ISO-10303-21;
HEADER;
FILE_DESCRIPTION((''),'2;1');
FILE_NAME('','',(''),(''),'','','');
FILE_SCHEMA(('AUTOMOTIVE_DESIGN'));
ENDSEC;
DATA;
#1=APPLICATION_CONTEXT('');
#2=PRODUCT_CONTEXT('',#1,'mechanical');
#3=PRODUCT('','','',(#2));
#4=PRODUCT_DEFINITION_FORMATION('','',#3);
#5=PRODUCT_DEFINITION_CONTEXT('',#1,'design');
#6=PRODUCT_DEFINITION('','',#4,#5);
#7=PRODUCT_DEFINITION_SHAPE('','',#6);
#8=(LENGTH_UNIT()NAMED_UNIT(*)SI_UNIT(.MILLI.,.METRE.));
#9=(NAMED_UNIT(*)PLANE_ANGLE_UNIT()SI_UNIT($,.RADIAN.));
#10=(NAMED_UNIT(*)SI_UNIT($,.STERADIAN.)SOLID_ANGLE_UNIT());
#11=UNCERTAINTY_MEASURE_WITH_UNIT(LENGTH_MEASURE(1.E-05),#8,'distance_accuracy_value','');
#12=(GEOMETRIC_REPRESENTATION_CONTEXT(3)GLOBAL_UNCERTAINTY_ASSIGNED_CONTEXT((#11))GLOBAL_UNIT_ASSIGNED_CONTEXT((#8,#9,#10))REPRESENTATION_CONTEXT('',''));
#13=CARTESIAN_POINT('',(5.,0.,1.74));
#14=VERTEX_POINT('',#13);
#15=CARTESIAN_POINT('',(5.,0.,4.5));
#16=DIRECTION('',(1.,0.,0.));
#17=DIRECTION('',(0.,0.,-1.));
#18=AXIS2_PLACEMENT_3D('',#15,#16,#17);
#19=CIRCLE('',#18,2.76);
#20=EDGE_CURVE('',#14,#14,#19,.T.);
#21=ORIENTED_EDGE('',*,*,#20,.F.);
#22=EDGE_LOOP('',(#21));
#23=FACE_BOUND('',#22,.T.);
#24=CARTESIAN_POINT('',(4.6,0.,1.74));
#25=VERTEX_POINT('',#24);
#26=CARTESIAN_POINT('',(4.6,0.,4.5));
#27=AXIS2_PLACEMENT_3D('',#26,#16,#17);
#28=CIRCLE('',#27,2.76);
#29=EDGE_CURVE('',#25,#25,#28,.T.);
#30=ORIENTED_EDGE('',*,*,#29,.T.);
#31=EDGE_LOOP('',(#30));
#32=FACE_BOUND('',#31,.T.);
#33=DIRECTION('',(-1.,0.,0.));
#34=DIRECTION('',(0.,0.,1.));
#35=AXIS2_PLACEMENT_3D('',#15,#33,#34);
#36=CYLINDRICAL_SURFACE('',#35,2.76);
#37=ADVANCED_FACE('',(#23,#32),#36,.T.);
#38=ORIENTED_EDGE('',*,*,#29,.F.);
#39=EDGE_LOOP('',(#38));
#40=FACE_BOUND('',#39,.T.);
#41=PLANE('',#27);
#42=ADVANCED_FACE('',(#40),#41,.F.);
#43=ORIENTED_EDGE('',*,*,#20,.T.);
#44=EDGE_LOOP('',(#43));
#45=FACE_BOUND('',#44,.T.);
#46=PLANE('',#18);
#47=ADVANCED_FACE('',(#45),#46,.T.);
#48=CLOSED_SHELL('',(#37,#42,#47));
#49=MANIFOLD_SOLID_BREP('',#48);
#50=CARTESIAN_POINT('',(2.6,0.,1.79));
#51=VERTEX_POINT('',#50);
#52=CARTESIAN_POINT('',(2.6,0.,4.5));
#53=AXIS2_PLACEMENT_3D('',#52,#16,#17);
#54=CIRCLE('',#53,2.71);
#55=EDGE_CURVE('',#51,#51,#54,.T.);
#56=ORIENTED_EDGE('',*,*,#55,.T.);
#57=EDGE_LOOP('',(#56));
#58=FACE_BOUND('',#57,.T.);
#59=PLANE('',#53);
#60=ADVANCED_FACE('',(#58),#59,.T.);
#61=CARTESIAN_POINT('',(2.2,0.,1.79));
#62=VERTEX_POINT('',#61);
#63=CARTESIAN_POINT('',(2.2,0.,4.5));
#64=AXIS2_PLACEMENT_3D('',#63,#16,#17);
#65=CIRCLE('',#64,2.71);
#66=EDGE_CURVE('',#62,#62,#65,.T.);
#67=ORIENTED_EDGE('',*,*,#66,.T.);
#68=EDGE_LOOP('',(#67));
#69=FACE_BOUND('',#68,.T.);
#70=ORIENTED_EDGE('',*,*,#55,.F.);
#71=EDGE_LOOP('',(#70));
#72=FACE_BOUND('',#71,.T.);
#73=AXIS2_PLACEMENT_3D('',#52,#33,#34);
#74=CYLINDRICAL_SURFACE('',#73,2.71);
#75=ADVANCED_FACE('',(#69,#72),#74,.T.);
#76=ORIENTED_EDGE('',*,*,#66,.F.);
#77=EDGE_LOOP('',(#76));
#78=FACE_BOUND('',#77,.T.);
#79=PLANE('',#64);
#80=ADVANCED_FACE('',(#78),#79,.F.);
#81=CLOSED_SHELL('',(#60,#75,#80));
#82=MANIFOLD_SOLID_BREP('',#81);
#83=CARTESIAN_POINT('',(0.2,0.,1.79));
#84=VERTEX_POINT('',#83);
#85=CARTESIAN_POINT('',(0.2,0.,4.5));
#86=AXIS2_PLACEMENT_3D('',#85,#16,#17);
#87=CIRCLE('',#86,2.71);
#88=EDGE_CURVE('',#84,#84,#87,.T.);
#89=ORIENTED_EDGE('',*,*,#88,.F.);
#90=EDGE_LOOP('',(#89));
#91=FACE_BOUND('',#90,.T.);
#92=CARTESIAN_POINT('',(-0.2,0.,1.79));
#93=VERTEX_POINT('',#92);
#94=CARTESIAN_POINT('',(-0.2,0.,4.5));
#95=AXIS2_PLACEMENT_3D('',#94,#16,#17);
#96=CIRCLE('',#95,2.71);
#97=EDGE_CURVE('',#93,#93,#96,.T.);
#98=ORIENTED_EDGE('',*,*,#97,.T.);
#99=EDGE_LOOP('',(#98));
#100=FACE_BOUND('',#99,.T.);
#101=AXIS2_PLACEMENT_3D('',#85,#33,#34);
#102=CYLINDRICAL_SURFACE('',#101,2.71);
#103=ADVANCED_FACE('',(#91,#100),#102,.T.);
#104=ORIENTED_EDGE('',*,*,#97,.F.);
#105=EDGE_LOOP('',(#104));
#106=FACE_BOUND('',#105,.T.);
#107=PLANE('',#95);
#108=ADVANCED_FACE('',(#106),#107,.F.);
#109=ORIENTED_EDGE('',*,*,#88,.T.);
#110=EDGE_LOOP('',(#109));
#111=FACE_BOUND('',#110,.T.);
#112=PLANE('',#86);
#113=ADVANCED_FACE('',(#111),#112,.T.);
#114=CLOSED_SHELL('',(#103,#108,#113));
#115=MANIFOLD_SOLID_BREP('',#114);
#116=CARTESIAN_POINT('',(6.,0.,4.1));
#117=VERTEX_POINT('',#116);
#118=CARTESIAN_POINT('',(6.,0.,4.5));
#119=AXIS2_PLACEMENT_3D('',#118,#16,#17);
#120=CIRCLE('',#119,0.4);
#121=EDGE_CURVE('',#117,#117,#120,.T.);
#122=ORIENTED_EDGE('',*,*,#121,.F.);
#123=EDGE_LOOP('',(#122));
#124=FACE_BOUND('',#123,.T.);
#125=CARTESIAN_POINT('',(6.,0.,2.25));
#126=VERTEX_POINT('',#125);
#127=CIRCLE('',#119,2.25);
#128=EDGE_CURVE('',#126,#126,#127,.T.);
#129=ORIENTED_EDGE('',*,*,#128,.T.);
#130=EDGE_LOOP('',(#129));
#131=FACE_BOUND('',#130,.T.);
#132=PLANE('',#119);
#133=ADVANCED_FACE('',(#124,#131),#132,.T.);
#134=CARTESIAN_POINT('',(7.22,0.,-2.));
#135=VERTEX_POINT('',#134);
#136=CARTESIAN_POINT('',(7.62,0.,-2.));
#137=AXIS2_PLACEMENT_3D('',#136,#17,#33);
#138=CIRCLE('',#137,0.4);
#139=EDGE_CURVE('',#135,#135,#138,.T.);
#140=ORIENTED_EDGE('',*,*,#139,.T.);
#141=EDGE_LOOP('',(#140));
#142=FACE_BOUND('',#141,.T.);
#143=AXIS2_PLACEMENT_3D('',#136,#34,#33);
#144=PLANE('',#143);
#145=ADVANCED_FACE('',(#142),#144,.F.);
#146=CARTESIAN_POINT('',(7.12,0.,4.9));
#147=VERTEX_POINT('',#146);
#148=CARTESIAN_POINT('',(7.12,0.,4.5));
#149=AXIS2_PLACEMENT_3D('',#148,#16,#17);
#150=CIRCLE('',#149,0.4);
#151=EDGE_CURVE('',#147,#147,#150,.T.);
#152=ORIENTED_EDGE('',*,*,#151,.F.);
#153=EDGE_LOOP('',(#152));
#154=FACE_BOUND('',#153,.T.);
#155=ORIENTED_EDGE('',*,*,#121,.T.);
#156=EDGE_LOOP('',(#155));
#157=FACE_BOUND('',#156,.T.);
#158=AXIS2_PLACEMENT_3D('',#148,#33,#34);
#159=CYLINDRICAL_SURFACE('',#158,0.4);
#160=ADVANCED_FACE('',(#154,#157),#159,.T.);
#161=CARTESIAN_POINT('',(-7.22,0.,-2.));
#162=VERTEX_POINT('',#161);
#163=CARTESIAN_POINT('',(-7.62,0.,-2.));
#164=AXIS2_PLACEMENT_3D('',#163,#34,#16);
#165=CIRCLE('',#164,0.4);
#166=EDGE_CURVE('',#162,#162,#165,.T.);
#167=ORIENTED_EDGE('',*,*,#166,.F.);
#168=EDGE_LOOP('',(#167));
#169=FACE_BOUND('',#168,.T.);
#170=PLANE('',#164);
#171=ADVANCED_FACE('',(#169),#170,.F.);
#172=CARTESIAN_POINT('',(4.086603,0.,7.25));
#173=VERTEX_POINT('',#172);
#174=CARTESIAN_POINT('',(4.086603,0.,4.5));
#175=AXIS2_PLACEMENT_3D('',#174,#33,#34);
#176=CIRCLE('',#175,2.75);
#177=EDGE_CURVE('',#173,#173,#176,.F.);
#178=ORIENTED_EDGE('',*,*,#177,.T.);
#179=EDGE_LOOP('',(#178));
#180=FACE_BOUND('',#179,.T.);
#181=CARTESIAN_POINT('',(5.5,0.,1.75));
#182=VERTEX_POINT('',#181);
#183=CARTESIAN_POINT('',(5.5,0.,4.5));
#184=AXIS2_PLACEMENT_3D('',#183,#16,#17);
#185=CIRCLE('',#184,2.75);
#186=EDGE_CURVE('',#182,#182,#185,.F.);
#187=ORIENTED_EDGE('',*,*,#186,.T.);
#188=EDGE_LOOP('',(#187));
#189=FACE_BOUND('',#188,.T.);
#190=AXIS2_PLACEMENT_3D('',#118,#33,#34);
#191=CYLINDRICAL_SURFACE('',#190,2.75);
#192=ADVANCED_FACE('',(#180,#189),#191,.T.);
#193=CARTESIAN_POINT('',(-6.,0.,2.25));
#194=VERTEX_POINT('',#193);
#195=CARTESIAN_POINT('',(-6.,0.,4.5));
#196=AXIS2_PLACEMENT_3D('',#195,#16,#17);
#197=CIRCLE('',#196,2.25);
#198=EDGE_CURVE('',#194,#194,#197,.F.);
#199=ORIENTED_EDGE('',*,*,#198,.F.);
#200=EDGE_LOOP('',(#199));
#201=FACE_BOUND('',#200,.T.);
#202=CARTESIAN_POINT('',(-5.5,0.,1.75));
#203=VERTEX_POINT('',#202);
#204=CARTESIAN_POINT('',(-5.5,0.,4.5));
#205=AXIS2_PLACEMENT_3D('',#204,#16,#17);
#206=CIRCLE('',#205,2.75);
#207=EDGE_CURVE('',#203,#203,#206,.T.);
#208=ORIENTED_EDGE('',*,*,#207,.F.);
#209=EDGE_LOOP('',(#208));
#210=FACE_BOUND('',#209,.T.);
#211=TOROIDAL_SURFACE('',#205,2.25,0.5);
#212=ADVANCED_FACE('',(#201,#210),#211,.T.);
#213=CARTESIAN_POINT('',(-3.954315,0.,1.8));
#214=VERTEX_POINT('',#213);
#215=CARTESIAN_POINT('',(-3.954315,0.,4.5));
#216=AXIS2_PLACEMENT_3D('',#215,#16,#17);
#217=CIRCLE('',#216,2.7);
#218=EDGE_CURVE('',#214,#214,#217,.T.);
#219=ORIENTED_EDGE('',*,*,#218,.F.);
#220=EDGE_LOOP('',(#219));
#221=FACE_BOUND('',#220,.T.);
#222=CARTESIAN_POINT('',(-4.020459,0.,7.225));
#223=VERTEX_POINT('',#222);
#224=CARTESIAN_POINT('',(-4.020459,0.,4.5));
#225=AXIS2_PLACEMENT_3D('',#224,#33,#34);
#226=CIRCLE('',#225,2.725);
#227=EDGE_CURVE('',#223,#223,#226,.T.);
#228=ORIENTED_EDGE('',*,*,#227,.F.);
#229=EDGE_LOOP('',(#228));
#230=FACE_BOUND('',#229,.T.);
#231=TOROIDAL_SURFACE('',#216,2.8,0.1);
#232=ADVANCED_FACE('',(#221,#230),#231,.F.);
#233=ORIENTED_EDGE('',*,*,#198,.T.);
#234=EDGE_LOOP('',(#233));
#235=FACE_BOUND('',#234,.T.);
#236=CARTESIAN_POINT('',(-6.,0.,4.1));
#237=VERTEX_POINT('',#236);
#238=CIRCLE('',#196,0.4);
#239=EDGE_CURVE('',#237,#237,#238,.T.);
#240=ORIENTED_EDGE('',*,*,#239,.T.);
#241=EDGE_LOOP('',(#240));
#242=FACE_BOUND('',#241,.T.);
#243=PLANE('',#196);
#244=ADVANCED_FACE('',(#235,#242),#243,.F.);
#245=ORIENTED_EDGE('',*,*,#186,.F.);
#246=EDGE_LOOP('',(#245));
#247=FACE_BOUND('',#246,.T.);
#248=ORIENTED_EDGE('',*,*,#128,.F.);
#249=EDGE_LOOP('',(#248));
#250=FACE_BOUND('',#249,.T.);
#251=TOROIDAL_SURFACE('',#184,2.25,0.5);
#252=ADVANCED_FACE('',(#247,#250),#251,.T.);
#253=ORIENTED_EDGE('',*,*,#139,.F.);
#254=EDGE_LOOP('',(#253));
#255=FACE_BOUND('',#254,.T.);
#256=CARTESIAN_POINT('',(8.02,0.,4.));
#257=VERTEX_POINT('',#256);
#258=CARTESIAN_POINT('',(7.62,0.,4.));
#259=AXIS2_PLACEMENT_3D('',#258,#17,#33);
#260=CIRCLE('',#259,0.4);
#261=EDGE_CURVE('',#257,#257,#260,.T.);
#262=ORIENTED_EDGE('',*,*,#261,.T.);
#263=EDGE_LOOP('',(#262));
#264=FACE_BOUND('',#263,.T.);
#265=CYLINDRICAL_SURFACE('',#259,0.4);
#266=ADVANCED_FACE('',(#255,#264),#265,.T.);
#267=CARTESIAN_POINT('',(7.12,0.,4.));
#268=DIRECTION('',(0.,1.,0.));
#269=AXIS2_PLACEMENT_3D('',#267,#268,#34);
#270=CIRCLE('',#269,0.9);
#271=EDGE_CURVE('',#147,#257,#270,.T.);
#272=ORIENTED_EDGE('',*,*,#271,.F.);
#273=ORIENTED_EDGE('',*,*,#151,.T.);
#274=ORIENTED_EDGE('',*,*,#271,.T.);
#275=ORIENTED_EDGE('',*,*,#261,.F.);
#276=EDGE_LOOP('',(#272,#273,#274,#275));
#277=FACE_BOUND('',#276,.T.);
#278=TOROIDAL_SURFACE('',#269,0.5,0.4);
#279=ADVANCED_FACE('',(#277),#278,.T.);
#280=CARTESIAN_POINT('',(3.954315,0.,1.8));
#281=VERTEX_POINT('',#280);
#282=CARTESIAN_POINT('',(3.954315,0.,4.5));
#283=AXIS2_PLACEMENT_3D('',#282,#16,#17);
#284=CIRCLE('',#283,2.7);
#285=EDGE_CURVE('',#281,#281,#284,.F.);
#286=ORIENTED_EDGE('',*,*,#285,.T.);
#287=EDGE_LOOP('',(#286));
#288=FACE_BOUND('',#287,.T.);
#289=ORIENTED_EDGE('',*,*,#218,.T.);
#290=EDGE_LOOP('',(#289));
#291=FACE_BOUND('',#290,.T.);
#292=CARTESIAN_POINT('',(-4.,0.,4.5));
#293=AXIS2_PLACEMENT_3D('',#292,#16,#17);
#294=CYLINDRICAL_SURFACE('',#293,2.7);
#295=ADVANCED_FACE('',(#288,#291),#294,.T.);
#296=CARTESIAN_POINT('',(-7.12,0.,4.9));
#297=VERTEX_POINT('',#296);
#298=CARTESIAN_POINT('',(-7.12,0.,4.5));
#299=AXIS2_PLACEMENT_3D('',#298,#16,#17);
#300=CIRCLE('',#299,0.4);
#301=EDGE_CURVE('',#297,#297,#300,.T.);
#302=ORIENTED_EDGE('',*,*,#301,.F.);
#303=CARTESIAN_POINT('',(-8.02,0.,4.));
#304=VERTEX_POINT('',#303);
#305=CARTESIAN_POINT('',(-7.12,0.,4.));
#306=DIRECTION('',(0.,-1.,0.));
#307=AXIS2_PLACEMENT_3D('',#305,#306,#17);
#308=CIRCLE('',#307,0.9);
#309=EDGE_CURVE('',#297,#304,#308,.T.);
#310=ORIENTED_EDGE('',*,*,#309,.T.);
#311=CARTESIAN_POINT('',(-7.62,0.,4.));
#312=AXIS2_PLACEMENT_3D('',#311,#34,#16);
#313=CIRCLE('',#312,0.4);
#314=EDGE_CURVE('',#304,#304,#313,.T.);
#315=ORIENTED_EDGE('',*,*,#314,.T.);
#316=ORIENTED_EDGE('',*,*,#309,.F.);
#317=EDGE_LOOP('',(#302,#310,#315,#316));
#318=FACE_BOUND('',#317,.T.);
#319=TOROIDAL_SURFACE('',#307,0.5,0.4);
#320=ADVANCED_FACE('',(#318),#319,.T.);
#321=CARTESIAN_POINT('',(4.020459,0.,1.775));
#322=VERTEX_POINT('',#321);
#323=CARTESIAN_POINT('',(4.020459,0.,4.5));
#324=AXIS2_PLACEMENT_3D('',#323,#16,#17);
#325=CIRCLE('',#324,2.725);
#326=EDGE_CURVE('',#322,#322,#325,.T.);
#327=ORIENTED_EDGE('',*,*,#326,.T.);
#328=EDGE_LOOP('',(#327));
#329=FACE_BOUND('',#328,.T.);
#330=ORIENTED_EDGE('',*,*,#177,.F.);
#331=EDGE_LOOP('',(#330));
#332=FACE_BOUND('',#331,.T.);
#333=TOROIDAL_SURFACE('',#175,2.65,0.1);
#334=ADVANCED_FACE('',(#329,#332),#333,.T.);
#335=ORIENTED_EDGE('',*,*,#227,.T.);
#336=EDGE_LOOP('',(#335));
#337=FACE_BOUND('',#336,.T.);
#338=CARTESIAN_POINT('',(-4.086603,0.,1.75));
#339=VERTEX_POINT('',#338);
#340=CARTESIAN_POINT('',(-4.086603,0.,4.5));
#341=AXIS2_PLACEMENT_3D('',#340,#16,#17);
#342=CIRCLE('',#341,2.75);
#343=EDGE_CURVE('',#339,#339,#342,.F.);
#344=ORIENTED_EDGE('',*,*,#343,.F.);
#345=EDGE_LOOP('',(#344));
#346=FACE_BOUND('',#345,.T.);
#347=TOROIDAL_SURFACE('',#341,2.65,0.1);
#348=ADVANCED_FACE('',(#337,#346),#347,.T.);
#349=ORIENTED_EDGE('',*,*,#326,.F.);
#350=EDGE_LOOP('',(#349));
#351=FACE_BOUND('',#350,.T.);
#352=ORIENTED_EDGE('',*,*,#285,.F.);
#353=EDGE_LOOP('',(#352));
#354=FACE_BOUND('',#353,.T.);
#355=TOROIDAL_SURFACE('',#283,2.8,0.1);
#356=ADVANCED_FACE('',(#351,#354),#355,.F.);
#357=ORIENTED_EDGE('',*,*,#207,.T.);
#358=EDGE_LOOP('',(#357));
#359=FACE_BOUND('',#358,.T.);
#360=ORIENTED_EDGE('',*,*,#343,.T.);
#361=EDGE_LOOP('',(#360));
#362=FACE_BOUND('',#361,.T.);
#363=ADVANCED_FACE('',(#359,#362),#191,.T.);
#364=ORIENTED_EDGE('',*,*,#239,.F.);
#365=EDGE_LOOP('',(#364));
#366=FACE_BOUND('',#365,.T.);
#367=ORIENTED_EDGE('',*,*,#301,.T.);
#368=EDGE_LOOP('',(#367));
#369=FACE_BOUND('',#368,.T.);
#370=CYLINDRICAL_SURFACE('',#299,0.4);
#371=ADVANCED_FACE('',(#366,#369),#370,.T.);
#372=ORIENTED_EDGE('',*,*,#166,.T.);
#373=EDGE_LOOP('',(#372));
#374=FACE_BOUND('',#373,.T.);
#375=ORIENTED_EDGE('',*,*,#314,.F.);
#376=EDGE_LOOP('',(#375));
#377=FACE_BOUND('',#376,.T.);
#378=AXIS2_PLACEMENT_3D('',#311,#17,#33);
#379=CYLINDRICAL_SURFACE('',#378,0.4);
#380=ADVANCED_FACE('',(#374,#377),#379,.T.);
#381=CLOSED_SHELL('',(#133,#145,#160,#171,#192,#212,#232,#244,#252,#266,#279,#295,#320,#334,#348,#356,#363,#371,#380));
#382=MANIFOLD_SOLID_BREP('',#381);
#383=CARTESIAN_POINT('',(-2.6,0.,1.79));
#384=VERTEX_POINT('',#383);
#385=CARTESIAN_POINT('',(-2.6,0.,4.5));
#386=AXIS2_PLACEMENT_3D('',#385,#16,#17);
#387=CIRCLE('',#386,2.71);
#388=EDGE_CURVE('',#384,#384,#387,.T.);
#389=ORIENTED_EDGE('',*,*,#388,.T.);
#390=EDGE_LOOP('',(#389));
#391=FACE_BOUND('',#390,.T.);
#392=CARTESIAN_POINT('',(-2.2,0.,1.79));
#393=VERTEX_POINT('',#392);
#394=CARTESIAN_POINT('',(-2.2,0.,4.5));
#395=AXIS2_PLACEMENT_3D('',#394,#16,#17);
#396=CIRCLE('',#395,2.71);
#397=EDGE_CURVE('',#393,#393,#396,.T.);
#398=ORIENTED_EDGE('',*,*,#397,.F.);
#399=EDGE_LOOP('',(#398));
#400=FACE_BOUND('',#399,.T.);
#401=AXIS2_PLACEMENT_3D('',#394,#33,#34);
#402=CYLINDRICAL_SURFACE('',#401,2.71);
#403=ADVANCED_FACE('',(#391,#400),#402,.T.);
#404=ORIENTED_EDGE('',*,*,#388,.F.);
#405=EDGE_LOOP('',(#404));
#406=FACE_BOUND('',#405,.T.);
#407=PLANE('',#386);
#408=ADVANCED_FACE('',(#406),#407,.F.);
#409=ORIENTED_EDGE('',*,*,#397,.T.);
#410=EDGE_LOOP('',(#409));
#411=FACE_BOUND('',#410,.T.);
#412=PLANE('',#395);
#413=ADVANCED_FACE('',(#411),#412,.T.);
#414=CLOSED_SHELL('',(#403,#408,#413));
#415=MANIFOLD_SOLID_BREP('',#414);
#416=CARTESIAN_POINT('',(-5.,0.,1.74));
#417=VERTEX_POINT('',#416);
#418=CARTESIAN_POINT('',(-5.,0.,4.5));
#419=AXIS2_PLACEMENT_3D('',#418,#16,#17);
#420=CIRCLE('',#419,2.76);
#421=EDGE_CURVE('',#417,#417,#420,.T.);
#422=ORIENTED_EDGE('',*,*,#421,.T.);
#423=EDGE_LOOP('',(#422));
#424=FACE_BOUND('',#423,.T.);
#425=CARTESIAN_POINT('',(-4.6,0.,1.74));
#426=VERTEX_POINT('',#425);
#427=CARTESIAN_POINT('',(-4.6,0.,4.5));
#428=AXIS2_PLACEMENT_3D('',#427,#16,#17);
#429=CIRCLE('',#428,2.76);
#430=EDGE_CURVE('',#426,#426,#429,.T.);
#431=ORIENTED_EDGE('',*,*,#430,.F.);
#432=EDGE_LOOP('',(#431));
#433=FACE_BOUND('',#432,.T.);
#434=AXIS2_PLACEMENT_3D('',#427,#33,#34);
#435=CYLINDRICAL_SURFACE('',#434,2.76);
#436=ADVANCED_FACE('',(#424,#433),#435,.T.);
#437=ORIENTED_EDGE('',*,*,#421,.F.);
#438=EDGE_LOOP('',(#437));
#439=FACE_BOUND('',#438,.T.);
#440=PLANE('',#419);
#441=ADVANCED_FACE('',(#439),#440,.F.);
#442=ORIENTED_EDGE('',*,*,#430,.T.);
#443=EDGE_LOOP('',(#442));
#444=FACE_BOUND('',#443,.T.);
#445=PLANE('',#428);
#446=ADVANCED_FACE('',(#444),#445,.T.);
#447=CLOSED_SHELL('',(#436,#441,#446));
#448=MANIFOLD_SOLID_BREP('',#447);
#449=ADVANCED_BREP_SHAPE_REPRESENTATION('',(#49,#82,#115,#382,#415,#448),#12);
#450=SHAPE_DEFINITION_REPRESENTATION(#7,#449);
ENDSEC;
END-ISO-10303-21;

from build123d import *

# Parameters (mm, degrees)
SKETCH_1_R          = 2.75
EXTRUDE_1_DEPTH     = 6
SKETCH_5_OUTSIDE_W  = 10.36
SKETCH_5_OUTSIDE_H  = 10.36
SKETCH_5_OUTSIDE_R  = 2.7
CUT_EXTRUDE_2_DEPTH = 4
FILLET_10_R         = 0.1
FILLET_11_R         = 0.1
FILLET_13_R         = 0.5
SKETCH_6_R          = 2.76
EXTRUDE_2_DEPTH     = 0.2
SKETCH_7_R          = 2.76
EXTRUDE_3_DEPTH     = 0.2
SKETCH_8_R          = 2.71
EXTRUDE_4_DEPTH     = 0.2
SKETCH_9_R          = 2.71
EXTRUDE_5_DEPTH     = 0.2
SKETCH_10_R         = 2.71
EXTRUDE_6_DEPTH     = 0.2
SKETCH_13_R         = 0.4


with BuildPart() as part:
    # 草图1 → 拉伸1 (new, symmetric)
    with BuildSketch(Plane(origin=(0, 0, 0), x_dir=(0, 0, -1), z_dir=(1, 0, 0))):
        with Locations((-4.5, 0)):
            Circle(SKETCH_1_R)
    extrude(amount=EXTRUDE_1_DEPTH, both=True)

    # 草图5 outside → 切除-拉伸2 (cut, symmetric)
    with BuildSketch(Plane(origin=(0, 0, 0), x_dir=(0, 0, -1), z_dir=(1, 0, 0))):
        with Locations((-4.5, 0)):
            Rectangle(SKETCH_5_OUTSIDE_W, SKETCH_5_OUTSIDE_H)
        with Locations((-4.5, 0)):
            Circle(SKETCH_5_OUTSIDE_R, mode=Mode.SUBTRACT)
    extrude(amount=CUT_EXTRUDE_2_DEPTH, both=True, mode=Mode.SUBTRACT)

    # 圆角10
    # the kernel refuses this fillet: 0.1 mm, written as the material it takes off along each edge
    with BuildSketch(Plane(origin=(4, 0, 4.5), x_dir=(0, 0, -1), z_dir=(0, -1, 0))) as fillet_10_piece_1:
        with BuildLine():
            CenterArc((2.65, 0.08660254), FILLET_10_R, 300, 60)
            Line((2.75, 0.08660254), (2.752, 0.08660254))
            Line((2.752, 0.08660254), (2.752, 0))
            Line((2.752, 0), (2.75, -0.002))
            ThreePointArc((2.75, -0.002), (2.725, -0.002), (2.701, -0.001732051))
            Line((2.701, -0.001732051), (2.7, 0))
        make_face()
    revolve(axis=Axis((4, 0, 4.5), (1, 0, 0)), mode=Mode.SUBTRACT)
    with BuildSketch(Plane(origin=(-4, 0, 4.5), x_dir=(0, 0, -1), z_dir=(0, -1, 0))) as fillet_10_piece_2:
        with BuildLine():
            CenterArc((2.65, -0.08660254), FILLET_10_R, 0, 60)
            Line((2.7, 0), (2.701, 0.001732051))
            ThreePointArc((2.701, 0.001732051), (2.725, 0.002), (2.75, 0.002))
            Line((2.75, 0.002), (2.752, 0))
            Line((2.752, 0), (2.752, -0.08660254))
            Line((2.752, -0.08660254), (2.75, -0.08660254))
        make_face()
    revolve(axis=Axis((-4, 0, 4.5), (1, 0, 0)), mode=Mode.SUBTRACT)

    # 圆角11
    fillet_11_edges = [part.edges().sort_by_distance(p)[0] for p in [
        (4, 0, 7.2),
        (-4, 0, 7.2),
    ]]
    fillet(fillet_11_edges, radius=FILLET_11_R)

    # 圆角13
    fillet_13_edges = [part.edges().sort_by_distance(p)[0] for p in [
        (-6, 0, 7.25),
        (6, 0, 7.25),
    ]]
    fillet(fillet_13_edges, radius=FILLET_13_R)

    # 扫描1: sweep along a path in 草图12
    with BuildLine(Plane(origin=(0, 0, 0), x_dir=(1, 0, 0), z_dir=(0, 1, 0))) as sweep_1_path:
        Line((-6, -4.5), (-7.12, -4.5))
        ThreePointArc((-7.12, -4.5), (-7.473553391, -4.353553391), (-7.62, -4))
        Line((-7.62, -4), (-7.62, 2))
    # 草图13 → 扫描1 (sweep)
    with BuildSketch(Plane(origin=(-6, 0, 0), x_dir=(0, 0, -1), z_dir=(1, 0, 0))):
        with Locations((-4.5, 0)):
            Circle(SKETCH_13_R)
    sweep_1 = sweep(path=sweep_1_path.line)

    # 镜向3: 扫描1 across plane
    add(sweep_1.mirror(Plane(origin=(0, 0, 0), x_dir=(0, 0, 1), z_dir=(1, 0, 0))))


with BuildPart() as body_2:
    # 草图6 → 拉伸2 (new, symmetric)
    with BuildSketch(Plane(origin=(4.8, 0, 0), x_dir=(0, 0, -1), z_dir=(1, 0, 0))):
        with Locations((-4.5, 0)):
            Circle(SKETCH_6_R)
    extrude(amount=EXTRUDE_2_DEPTH, both=True)


with BuildPart() as body_3:
    # 草图7 → 拉伸3 (new, symmetric)
    with BuildSketch(Plane(origin=(-4.8, 0, 0), x_dir=(0, 0, -1), z_dir=(1, 0, 0))):
        with Locations((-4.5, 0)):
            Circle(SKETCH_7_R)
    extrude(amount=EXTRUDE_3_DEPTH, both=True)


with BuildPart() as body_4:
    # 草图8 → 拉伸4 (new, symmetric)
    with BuildSketch(Plane(origin=(2.4, 0, 0), x_dir=(0, 0, -1), z_dir=(1, 0, 0))):
        with Locations((-4.5, 0)):
            Circle(SKETCH_8_R)
    extrude(amount=EXTRUDE_4_DEPTH, both=True)


with BuildPart() as body_5:
    # 草图9 → 拉伸5 (new, symmetric)
    with BuildSketch(Plane(origin=(-2.4, 0, 0), x_dir=(0, 0, -1), z_dir=(1, 0, 0))):
        with Locations((-4.5, 0)):
            Circle(SKETCH_9_R)
    extrude(amount=EXTRUDE_5_DEPTH, both=True)


with BuildPart() as body_6:
    # 草图10 → 拉伸6 (new, symmetric)
    with BuildSketch(Plane(origin=(0, 0, 0), x_dir=(0, 0, -1), z_dir=(1, 0, 0))):
        with Locations((-4.5, 0)):
            Circle(SKETCH_10_R)
    extrude(amount=EXTRUDE_6_DEPTH, both=True)


solid = Compound([part.part, body_2.part, body_3.part, body_4.part, body_5.part, body_6.part])
